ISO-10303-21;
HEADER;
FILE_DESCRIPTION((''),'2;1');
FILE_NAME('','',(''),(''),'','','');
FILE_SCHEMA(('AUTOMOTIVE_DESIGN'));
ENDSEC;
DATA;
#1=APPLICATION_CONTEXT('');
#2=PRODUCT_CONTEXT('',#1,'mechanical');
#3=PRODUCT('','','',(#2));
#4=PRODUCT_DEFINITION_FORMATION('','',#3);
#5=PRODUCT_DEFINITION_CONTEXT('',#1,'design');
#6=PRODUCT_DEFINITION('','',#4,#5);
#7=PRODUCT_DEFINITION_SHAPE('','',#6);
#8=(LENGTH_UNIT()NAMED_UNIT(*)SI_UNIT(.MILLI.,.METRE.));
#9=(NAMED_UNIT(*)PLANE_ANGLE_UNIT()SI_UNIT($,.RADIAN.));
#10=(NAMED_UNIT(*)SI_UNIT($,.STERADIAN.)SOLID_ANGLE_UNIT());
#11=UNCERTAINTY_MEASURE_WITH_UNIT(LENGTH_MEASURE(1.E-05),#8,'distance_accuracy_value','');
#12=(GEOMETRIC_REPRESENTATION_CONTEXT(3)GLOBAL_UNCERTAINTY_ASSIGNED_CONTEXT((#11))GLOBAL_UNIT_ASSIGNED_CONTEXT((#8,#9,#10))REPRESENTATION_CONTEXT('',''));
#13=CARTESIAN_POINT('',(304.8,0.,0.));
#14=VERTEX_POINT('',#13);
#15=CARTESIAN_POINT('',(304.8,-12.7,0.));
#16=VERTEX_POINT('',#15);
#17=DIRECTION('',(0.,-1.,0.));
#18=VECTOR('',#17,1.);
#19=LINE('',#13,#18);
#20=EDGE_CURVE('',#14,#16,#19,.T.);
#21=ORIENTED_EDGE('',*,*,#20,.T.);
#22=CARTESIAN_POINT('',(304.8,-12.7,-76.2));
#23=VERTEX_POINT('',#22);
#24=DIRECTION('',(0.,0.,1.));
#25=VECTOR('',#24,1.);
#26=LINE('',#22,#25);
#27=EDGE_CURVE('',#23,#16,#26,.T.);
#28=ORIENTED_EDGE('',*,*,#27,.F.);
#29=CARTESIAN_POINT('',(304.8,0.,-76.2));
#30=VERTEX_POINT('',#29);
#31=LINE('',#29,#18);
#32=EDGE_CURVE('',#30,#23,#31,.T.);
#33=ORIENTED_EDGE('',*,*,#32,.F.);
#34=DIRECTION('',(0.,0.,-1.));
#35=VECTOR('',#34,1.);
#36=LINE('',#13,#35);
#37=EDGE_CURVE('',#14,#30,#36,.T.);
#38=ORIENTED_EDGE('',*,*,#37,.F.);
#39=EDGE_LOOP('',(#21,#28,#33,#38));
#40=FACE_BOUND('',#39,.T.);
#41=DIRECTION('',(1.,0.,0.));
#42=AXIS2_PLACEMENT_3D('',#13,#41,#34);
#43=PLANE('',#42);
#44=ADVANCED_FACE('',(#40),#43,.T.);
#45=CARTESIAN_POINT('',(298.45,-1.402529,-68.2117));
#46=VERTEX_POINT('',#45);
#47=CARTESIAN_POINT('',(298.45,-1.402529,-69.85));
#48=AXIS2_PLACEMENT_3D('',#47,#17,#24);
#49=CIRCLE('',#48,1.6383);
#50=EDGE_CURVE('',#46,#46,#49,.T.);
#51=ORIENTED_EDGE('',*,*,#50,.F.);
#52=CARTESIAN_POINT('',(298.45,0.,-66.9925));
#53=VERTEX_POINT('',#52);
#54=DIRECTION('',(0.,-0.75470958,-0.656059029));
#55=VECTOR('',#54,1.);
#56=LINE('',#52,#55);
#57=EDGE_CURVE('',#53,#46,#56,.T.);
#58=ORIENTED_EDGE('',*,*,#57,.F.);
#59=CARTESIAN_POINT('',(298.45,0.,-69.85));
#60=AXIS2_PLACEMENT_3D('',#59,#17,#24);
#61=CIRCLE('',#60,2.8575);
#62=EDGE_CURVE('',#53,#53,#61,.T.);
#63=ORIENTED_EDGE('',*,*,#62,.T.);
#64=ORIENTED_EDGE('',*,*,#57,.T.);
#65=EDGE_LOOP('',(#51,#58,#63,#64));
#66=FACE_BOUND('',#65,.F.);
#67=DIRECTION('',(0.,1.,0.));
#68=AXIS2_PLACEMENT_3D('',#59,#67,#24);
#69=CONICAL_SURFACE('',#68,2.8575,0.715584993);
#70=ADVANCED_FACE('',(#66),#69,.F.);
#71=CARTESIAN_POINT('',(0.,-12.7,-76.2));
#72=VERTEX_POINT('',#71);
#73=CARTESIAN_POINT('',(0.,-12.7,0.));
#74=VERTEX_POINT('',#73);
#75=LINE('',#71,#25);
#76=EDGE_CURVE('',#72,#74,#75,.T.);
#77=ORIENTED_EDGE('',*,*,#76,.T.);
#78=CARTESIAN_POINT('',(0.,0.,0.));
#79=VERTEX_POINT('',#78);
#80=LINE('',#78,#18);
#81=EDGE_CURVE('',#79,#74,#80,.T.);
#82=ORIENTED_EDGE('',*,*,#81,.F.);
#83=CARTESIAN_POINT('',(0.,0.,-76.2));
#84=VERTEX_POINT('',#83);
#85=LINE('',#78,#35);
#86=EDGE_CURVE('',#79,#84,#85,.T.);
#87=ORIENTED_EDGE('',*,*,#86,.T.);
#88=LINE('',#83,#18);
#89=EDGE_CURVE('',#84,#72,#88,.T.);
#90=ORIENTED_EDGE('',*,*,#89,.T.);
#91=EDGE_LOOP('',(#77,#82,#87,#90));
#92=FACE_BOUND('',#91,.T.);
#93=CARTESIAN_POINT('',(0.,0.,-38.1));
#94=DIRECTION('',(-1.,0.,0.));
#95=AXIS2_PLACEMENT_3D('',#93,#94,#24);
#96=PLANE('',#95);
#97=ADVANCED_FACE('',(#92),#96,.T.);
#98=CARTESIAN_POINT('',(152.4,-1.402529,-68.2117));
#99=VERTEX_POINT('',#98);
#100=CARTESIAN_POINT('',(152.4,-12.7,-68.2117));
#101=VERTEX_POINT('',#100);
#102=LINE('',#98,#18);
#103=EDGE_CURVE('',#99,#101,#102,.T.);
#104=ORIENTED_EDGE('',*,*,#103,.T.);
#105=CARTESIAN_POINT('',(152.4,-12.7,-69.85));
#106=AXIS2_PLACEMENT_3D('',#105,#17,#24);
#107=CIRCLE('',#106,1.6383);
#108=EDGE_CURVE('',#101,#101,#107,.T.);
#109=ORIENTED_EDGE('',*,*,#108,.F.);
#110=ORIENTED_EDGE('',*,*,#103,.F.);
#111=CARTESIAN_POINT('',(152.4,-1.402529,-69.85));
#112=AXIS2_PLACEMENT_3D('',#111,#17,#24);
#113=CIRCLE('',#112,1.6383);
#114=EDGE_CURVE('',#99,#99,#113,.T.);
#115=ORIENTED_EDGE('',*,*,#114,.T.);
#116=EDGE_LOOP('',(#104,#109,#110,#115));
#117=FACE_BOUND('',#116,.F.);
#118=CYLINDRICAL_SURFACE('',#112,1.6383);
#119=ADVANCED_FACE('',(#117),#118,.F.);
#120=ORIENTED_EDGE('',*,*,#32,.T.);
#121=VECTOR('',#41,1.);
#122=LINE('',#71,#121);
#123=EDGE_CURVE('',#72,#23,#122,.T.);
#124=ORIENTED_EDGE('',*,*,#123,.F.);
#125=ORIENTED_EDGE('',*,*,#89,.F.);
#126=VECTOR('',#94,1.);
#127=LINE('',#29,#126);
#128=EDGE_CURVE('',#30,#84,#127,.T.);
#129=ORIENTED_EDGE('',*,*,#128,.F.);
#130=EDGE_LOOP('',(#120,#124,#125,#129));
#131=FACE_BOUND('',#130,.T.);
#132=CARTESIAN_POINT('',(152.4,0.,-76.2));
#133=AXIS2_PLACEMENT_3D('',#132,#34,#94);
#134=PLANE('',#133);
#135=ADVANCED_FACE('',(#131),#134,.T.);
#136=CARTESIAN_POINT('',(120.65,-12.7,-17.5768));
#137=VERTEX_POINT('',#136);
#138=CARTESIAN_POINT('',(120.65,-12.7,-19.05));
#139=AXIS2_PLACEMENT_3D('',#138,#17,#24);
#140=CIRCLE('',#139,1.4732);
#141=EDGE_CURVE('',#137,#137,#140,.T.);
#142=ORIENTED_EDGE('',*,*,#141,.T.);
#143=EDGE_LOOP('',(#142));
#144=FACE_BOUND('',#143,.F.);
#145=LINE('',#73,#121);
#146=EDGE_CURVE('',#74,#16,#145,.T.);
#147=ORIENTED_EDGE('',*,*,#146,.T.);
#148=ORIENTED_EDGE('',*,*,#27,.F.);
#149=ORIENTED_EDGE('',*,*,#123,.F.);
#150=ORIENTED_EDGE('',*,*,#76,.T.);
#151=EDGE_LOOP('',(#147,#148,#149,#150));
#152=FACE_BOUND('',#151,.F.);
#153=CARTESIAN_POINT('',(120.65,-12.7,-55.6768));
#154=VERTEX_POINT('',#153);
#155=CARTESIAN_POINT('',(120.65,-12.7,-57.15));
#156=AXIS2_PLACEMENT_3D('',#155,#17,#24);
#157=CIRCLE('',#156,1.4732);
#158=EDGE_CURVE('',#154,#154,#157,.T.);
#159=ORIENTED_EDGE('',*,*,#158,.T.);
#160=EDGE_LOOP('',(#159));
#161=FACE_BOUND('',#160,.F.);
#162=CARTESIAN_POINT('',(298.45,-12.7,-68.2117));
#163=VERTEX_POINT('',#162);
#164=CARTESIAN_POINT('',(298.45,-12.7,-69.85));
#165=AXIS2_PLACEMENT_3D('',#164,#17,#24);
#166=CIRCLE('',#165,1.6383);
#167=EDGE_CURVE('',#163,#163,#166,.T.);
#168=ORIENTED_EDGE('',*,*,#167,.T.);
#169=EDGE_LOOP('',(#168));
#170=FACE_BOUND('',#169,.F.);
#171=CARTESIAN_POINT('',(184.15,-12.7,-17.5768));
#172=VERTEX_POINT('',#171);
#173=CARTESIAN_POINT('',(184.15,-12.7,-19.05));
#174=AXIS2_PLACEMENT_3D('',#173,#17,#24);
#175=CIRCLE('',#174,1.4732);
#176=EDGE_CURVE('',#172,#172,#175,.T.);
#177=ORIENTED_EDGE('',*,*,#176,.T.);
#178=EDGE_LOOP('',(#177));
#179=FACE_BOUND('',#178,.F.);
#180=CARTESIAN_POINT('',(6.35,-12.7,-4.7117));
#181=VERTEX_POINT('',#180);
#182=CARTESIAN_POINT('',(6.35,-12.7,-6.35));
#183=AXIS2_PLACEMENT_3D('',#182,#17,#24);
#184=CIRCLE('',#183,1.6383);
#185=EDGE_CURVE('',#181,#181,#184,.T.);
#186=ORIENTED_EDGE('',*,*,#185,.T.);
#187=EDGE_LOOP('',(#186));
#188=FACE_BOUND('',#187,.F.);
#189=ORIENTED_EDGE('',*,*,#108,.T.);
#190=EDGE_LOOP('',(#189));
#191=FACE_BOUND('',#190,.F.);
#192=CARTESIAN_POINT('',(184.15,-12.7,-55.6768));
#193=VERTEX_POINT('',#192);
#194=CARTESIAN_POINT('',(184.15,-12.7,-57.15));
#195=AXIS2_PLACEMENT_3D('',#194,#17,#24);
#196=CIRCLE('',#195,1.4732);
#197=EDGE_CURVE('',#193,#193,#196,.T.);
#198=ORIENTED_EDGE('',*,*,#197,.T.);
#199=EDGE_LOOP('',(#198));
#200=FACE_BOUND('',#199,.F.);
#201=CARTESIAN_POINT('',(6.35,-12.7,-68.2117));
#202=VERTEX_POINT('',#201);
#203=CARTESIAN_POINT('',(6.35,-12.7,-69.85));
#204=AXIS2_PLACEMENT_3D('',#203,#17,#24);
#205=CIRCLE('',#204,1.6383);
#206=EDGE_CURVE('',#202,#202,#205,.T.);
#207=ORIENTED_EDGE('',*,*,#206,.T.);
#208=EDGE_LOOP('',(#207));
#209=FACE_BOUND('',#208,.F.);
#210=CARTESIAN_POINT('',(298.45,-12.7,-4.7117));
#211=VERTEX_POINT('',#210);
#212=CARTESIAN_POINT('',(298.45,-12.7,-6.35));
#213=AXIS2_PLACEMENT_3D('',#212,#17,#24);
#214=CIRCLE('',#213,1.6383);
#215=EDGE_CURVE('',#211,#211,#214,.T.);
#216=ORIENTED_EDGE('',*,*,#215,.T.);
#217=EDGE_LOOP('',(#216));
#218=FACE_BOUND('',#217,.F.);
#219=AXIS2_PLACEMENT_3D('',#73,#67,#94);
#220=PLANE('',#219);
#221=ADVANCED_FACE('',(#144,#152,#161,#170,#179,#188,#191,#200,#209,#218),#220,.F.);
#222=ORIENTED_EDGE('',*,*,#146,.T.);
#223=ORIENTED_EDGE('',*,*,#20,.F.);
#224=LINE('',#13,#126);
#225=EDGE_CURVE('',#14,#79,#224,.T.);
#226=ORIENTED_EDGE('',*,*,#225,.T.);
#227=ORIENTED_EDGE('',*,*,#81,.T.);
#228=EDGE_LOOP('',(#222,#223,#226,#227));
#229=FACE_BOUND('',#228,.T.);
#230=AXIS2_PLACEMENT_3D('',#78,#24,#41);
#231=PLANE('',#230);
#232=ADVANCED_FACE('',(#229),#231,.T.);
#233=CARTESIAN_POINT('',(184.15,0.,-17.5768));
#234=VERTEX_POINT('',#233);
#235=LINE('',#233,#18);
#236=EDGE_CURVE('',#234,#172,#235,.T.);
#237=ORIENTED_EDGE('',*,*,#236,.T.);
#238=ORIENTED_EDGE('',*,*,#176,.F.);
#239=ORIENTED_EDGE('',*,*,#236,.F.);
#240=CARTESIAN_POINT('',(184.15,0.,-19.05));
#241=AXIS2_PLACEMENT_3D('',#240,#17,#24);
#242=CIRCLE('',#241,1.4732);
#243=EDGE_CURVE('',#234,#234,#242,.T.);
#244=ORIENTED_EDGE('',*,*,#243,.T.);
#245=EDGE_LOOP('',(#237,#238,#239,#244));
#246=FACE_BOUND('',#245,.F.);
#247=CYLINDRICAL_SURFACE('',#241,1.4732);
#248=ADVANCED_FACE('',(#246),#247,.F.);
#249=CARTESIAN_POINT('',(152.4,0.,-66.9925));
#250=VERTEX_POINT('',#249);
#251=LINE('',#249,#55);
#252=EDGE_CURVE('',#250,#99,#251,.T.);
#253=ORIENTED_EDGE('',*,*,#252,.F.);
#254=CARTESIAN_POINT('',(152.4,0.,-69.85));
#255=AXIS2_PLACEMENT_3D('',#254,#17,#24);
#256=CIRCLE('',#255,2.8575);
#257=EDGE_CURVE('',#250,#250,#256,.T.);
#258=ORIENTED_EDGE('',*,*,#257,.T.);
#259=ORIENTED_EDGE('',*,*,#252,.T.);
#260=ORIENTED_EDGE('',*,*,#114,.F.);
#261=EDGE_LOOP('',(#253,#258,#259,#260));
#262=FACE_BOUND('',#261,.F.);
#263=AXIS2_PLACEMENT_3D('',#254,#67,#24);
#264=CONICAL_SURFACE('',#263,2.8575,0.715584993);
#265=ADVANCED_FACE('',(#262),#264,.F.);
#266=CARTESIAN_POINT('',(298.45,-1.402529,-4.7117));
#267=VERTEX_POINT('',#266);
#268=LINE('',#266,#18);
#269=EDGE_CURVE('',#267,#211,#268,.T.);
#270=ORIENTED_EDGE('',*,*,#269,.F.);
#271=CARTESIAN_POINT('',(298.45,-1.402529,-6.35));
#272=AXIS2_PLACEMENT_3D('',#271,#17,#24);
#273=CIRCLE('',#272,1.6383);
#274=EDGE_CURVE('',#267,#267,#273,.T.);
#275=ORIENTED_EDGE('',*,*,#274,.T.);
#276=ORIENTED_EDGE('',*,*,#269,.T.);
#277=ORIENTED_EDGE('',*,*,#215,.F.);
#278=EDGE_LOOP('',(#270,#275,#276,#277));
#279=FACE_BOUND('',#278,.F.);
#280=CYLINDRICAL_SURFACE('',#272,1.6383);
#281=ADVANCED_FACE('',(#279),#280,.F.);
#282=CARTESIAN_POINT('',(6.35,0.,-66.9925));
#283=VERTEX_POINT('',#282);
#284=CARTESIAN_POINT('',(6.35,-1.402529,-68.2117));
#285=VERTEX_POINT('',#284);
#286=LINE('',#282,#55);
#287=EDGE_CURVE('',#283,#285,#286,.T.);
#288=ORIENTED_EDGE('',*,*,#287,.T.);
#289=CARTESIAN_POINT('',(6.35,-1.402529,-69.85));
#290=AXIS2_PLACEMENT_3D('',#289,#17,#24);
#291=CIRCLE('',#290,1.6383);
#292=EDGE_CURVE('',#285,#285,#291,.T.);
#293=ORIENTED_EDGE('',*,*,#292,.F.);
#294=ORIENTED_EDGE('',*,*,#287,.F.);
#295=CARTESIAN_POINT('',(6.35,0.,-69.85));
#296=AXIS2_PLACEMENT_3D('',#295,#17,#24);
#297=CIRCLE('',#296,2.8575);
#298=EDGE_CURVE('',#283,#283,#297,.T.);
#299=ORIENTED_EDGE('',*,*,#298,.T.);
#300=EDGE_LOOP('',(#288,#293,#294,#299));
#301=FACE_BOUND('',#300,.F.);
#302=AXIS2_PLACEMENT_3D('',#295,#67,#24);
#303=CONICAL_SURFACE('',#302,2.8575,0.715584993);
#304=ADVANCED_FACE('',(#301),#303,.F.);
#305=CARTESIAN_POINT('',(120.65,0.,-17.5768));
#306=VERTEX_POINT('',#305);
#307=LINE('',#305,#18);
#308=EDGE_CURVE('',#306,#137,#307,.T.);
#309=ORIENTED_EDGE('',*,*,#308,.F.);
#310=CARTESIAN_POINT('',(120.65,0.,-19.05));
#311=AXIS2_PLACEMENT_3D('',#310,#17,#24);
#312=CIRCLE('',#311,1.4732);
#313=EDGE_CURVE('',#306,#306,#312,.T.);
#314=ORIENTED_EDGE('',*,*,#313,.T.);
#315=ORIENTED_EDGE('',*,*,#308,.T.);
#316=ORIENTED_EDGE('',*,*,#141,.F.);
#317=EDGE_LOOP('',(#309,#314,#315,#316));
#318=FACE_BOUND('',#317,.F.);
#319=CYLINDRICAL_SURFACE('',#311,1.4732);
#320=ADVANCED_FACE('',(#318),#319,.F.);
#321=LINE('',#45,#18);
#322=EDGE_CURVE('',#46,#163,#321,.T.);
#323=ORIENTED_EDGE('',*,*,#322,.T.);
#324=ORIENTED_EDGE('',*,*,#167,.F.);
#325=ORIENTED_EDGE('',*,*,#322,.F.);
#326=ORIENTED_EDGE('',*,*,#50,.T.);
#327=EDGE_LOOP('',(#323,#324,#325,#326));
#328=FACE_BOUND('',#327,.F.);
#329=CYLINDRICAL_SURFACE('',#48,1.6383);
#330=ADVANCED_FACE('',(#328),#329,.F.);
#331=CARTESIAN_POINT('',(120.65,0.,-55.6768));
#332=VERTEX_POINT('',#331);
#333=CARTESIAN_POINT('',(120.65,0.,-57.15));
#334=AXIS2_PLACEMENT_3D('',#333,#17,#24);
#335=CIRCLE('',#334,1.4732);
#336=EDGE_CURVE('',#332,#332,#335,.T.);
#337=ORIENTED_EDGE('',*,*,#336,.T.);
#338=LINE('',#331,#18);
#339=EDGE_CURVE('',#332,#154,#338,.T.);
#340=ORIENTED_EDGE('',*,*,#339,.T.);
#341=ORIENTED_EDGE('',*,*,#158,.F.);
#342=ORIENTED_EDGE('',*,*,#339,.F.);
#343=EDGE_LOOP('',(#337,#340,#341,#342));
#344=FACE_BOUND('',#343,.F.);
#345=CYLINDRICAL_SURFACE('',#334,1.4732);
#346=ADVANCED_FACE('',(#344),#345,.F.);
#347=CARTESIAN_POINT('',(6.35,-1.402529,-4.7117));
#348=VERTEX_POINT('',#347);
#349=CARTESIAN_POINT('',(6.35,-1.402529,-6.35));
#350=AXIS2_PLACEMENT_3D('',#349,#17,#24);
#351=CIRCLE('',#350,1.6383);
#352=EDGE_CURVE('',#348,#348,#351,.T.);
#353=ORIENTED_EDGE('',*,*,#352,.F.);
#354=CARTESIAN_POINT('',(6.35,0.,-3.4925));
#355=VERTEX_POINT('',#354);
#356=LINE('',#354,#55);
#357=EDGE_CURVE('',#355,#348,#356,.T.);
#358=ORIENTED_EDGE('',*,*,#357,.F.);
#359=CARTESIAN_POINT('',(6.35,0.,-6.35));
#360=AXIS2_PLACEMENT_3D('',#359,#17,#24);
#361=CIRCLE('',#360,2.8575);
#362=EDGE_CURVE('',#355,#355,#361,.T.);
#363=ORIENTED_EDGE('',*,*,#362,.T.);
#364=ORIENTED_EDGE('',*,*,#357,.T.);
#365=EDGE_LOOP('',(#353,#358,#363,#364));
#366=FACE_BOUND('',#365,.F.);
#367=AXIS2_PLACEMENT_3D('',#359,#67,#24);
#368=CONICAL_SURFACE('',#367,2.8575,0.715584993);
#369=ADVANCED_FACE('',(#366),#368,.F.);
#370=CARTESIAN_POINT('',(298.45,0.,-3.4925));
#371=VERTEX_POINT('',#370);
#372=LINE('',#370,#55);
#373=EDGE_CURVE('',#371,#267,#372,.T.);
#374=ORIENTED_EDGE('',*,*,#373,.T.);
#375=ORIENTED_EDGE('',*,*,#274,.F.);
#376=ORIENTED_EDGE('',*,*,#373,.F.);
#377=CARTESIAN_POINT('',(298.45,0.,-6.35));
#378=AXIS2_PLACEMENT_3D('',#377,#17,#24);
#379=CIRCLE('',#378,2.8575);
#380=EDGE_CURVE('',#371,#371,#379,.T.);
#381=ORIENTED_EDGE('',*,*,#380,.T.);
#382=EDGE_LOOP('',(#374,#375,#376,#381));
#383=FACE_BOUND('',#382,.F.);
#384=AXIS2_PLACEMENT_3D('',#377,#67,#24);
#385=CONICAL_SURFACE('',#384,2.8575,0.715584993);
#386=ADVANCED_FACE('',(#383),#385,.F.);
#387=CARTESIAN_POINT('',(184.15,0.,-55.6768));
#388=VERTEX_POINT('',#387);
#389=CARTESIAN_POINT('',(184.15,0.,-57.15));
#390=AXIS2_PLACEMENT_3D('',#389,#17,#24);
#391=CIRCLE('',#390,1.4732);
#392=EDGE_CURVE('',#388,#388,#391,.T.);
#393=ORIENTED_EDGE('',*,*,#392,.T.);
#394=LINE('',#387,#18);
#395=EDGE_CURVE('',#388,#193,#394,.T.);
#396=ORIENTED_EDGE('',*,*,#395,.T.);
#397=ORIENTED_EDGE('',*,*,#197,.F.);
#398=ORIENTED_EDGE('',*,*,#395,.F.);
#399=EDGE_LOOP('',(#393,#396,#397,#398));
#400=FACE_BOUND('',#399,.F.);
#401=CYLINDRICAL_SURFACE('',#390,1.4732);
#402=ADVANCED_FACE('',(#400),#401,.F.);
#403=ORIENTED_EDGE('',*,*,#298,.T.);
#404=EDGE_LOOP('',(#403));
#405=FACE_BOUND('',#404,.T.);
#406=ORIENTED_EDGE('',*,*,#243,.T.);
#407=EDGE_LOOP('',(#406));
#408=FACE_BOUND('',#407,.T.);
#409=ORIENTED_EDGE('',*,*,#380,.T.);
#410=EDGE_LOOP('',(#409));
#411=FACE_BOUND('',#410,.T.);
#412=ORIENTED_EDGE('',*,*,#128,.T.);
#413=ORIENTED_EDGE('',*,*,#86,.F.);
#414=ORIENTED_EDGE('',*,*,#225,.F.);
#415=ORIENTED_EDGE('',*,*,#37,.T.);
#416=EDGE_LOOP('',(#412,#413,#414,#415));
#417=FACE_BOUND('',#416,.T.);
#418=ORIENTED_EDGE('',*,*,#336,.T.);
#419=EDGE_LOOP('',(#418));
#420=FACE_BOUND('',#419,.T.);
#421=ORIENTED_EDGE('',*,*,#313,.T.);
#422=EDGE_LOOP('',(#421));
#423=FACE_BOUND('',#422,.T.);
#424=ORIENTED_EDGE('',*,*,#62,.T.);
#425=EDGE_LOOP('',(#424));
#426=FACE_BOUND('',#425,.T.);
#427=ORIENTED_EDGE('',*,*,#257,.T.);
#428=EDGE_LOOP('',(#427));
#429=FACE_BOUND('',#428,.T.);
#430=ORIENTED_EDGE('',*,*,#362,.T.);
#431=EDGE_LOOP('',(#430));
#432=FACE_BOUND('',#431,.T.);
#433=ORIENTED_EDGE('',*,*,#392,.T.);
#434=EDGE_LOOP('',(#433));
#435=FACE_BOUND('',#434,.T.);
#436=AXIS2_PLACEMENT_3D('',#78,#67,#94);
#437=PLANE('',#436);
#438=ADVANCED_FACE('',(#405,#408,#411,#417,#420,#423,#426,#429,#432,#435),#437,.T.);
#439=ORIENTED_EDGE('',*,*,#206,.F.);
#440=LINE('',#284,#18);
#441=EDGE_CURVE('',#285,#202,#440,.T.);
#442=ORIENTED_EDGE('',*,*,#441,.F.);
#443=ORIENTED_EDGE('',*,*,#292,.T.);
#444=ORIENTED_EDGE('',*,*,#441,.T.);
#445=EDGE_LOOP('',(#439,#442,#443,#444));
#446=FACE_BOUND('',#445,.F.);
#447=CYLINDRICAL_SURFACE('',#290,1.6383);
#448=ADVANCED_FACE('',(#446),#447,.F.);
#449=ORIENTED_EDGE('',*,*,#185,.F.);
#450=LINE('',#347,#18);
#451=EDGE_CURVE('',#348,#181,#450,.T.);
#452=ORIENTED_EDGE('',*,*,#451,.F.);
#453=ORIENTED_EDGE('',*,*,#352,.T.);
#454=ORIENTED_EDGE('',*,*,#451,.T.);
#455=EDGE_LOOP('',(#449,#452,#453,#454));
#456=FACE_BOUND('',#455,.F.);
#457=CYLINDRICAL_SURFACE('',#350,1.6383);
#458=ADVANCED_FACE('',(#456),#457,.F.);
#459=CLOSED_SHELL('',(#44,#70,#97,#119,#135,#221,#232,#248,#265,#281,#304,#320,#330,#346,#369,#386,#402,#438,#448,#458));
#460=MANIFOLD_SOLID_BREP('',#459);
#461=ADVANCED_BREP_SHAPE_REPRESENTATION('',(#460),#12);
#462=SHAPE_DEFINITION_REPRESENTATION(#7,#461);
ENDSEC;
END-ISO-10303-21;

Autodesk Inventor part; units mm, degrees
ref_plane "YZ Plane" through (0, 0, 0) normal (1, 0, 0) x (0, 1, 0)
ref_plane "XZ Plane" through (0, 0, 0) normal (0, 1, 0) x (-1, 0, 0)
ref_plane "XY Plane" through (0, 0, 0) normal (0, 0, 1) x (1, 0, 0)
sketch "Sketch1" plane through (0, 0, 0) normal (0, 1, 0) x (-1, 0, 0)
  line L0 (0, 0) -> (-304.8, 0)
  line L1 (-304.8, 0) -> (-304.8, -76.2)
  line L2 (-304.8, -76.2) -> (0, -76.2)
  line L3 (0, -76.2) -> (0, 0)
  line L4 (0, -38.1) -> (-304.8, -38.1)
  line L5 (-152.4, -76.2) -> (-152.4, 0)
  point P0 (-6.35, -69.85)
  point P1 (-6.35, -6.35)
  point P2 (-298.45, -69.85)
  point P3 (-298.45, -6.35)
  point P4 (-152.4, -69.85)
  dimension "d0" = 76.2
  dimension "d1" = 304.8
  dimension "d17" = 6.35
  dimension "d18" = 6.35
extrude "Extrusion1" add sketch "Sketch1" against normal blind 12.7
hole "Back Panel Mount Hole" at (6.35, 0, -69.85) direction (0, -1, 0) diameter 3.2766 end through all countersink diameter 5.715 countersink angle 82 clearance for "Flat Head Machine Screw (82)" size "#4" standard "Ansi Unified Screw Threads"
pattern_sketch "Back Panel Mounting Holes" of "Back Panel Mount Hole" from (6.35, 0, -69.85) copies at (6.35, 0, -6.35) at (298.45, 0, -69.85) at (298.45, 0, -6.35) at (152.4, 0, -69.85)
sketch "Name Plate Hole Pattern" plane through (0, 0, 0) normal (0, 1, 0) x (1, 0, 0)
  line L0 (127, 25.4) -> (177.8, 25.4) construction
  line L1 (177.8, 25.4) -> (177.8, 50.8) construction
  line L2 (177.8, 50.8) -> (127, 50.8) construction
  line L3 (127, 50.8) -> (127, 25.4) construction
  line L4 (127, 25.4) -> (177.8, 50.8) construction
  line L5 (177.8, 25.4) -> (127, 50.8) construction
  line L6 (152.4, 76.2) -> (152.4, 0) projected
  line L7 (184.15, 19.05) -> (120.65, 19.05) construction
  line L8 (120.65, 19.05) -> (120.65, 57.15) construction
  line L9 (120.65, 57.15) -> (184.15, 57.15) construction
  line L10 (184.15, 57.15) -> (184.15, 19.05) construction
  point P0 (152.4, 38.1)
  dimension "d19" = 50.8
  dimension "d20" = 25.4
  dimension "d21" = 6.35
hole "Name Plate Mounting Hole" at (120.65, 0, -57.15) direction (0, -1, 0) diameter 2.9464 end through all clearance for "Flat Head Machine Screw (82)" size "#4" standard "Ansi Unified Screw Threads"
pattern_sketch "Name Plate Mounting Holes" of "Name Plate Mounting Hole" from (120.65, 0, -57.15) copies at (184.15, 0, -57.15) at (184.15, 0, -19.05) at (120.65, 0, -19.05)
equation "\"d18\" = d17"
properties material "MDF Medium Density Fiberboard"
